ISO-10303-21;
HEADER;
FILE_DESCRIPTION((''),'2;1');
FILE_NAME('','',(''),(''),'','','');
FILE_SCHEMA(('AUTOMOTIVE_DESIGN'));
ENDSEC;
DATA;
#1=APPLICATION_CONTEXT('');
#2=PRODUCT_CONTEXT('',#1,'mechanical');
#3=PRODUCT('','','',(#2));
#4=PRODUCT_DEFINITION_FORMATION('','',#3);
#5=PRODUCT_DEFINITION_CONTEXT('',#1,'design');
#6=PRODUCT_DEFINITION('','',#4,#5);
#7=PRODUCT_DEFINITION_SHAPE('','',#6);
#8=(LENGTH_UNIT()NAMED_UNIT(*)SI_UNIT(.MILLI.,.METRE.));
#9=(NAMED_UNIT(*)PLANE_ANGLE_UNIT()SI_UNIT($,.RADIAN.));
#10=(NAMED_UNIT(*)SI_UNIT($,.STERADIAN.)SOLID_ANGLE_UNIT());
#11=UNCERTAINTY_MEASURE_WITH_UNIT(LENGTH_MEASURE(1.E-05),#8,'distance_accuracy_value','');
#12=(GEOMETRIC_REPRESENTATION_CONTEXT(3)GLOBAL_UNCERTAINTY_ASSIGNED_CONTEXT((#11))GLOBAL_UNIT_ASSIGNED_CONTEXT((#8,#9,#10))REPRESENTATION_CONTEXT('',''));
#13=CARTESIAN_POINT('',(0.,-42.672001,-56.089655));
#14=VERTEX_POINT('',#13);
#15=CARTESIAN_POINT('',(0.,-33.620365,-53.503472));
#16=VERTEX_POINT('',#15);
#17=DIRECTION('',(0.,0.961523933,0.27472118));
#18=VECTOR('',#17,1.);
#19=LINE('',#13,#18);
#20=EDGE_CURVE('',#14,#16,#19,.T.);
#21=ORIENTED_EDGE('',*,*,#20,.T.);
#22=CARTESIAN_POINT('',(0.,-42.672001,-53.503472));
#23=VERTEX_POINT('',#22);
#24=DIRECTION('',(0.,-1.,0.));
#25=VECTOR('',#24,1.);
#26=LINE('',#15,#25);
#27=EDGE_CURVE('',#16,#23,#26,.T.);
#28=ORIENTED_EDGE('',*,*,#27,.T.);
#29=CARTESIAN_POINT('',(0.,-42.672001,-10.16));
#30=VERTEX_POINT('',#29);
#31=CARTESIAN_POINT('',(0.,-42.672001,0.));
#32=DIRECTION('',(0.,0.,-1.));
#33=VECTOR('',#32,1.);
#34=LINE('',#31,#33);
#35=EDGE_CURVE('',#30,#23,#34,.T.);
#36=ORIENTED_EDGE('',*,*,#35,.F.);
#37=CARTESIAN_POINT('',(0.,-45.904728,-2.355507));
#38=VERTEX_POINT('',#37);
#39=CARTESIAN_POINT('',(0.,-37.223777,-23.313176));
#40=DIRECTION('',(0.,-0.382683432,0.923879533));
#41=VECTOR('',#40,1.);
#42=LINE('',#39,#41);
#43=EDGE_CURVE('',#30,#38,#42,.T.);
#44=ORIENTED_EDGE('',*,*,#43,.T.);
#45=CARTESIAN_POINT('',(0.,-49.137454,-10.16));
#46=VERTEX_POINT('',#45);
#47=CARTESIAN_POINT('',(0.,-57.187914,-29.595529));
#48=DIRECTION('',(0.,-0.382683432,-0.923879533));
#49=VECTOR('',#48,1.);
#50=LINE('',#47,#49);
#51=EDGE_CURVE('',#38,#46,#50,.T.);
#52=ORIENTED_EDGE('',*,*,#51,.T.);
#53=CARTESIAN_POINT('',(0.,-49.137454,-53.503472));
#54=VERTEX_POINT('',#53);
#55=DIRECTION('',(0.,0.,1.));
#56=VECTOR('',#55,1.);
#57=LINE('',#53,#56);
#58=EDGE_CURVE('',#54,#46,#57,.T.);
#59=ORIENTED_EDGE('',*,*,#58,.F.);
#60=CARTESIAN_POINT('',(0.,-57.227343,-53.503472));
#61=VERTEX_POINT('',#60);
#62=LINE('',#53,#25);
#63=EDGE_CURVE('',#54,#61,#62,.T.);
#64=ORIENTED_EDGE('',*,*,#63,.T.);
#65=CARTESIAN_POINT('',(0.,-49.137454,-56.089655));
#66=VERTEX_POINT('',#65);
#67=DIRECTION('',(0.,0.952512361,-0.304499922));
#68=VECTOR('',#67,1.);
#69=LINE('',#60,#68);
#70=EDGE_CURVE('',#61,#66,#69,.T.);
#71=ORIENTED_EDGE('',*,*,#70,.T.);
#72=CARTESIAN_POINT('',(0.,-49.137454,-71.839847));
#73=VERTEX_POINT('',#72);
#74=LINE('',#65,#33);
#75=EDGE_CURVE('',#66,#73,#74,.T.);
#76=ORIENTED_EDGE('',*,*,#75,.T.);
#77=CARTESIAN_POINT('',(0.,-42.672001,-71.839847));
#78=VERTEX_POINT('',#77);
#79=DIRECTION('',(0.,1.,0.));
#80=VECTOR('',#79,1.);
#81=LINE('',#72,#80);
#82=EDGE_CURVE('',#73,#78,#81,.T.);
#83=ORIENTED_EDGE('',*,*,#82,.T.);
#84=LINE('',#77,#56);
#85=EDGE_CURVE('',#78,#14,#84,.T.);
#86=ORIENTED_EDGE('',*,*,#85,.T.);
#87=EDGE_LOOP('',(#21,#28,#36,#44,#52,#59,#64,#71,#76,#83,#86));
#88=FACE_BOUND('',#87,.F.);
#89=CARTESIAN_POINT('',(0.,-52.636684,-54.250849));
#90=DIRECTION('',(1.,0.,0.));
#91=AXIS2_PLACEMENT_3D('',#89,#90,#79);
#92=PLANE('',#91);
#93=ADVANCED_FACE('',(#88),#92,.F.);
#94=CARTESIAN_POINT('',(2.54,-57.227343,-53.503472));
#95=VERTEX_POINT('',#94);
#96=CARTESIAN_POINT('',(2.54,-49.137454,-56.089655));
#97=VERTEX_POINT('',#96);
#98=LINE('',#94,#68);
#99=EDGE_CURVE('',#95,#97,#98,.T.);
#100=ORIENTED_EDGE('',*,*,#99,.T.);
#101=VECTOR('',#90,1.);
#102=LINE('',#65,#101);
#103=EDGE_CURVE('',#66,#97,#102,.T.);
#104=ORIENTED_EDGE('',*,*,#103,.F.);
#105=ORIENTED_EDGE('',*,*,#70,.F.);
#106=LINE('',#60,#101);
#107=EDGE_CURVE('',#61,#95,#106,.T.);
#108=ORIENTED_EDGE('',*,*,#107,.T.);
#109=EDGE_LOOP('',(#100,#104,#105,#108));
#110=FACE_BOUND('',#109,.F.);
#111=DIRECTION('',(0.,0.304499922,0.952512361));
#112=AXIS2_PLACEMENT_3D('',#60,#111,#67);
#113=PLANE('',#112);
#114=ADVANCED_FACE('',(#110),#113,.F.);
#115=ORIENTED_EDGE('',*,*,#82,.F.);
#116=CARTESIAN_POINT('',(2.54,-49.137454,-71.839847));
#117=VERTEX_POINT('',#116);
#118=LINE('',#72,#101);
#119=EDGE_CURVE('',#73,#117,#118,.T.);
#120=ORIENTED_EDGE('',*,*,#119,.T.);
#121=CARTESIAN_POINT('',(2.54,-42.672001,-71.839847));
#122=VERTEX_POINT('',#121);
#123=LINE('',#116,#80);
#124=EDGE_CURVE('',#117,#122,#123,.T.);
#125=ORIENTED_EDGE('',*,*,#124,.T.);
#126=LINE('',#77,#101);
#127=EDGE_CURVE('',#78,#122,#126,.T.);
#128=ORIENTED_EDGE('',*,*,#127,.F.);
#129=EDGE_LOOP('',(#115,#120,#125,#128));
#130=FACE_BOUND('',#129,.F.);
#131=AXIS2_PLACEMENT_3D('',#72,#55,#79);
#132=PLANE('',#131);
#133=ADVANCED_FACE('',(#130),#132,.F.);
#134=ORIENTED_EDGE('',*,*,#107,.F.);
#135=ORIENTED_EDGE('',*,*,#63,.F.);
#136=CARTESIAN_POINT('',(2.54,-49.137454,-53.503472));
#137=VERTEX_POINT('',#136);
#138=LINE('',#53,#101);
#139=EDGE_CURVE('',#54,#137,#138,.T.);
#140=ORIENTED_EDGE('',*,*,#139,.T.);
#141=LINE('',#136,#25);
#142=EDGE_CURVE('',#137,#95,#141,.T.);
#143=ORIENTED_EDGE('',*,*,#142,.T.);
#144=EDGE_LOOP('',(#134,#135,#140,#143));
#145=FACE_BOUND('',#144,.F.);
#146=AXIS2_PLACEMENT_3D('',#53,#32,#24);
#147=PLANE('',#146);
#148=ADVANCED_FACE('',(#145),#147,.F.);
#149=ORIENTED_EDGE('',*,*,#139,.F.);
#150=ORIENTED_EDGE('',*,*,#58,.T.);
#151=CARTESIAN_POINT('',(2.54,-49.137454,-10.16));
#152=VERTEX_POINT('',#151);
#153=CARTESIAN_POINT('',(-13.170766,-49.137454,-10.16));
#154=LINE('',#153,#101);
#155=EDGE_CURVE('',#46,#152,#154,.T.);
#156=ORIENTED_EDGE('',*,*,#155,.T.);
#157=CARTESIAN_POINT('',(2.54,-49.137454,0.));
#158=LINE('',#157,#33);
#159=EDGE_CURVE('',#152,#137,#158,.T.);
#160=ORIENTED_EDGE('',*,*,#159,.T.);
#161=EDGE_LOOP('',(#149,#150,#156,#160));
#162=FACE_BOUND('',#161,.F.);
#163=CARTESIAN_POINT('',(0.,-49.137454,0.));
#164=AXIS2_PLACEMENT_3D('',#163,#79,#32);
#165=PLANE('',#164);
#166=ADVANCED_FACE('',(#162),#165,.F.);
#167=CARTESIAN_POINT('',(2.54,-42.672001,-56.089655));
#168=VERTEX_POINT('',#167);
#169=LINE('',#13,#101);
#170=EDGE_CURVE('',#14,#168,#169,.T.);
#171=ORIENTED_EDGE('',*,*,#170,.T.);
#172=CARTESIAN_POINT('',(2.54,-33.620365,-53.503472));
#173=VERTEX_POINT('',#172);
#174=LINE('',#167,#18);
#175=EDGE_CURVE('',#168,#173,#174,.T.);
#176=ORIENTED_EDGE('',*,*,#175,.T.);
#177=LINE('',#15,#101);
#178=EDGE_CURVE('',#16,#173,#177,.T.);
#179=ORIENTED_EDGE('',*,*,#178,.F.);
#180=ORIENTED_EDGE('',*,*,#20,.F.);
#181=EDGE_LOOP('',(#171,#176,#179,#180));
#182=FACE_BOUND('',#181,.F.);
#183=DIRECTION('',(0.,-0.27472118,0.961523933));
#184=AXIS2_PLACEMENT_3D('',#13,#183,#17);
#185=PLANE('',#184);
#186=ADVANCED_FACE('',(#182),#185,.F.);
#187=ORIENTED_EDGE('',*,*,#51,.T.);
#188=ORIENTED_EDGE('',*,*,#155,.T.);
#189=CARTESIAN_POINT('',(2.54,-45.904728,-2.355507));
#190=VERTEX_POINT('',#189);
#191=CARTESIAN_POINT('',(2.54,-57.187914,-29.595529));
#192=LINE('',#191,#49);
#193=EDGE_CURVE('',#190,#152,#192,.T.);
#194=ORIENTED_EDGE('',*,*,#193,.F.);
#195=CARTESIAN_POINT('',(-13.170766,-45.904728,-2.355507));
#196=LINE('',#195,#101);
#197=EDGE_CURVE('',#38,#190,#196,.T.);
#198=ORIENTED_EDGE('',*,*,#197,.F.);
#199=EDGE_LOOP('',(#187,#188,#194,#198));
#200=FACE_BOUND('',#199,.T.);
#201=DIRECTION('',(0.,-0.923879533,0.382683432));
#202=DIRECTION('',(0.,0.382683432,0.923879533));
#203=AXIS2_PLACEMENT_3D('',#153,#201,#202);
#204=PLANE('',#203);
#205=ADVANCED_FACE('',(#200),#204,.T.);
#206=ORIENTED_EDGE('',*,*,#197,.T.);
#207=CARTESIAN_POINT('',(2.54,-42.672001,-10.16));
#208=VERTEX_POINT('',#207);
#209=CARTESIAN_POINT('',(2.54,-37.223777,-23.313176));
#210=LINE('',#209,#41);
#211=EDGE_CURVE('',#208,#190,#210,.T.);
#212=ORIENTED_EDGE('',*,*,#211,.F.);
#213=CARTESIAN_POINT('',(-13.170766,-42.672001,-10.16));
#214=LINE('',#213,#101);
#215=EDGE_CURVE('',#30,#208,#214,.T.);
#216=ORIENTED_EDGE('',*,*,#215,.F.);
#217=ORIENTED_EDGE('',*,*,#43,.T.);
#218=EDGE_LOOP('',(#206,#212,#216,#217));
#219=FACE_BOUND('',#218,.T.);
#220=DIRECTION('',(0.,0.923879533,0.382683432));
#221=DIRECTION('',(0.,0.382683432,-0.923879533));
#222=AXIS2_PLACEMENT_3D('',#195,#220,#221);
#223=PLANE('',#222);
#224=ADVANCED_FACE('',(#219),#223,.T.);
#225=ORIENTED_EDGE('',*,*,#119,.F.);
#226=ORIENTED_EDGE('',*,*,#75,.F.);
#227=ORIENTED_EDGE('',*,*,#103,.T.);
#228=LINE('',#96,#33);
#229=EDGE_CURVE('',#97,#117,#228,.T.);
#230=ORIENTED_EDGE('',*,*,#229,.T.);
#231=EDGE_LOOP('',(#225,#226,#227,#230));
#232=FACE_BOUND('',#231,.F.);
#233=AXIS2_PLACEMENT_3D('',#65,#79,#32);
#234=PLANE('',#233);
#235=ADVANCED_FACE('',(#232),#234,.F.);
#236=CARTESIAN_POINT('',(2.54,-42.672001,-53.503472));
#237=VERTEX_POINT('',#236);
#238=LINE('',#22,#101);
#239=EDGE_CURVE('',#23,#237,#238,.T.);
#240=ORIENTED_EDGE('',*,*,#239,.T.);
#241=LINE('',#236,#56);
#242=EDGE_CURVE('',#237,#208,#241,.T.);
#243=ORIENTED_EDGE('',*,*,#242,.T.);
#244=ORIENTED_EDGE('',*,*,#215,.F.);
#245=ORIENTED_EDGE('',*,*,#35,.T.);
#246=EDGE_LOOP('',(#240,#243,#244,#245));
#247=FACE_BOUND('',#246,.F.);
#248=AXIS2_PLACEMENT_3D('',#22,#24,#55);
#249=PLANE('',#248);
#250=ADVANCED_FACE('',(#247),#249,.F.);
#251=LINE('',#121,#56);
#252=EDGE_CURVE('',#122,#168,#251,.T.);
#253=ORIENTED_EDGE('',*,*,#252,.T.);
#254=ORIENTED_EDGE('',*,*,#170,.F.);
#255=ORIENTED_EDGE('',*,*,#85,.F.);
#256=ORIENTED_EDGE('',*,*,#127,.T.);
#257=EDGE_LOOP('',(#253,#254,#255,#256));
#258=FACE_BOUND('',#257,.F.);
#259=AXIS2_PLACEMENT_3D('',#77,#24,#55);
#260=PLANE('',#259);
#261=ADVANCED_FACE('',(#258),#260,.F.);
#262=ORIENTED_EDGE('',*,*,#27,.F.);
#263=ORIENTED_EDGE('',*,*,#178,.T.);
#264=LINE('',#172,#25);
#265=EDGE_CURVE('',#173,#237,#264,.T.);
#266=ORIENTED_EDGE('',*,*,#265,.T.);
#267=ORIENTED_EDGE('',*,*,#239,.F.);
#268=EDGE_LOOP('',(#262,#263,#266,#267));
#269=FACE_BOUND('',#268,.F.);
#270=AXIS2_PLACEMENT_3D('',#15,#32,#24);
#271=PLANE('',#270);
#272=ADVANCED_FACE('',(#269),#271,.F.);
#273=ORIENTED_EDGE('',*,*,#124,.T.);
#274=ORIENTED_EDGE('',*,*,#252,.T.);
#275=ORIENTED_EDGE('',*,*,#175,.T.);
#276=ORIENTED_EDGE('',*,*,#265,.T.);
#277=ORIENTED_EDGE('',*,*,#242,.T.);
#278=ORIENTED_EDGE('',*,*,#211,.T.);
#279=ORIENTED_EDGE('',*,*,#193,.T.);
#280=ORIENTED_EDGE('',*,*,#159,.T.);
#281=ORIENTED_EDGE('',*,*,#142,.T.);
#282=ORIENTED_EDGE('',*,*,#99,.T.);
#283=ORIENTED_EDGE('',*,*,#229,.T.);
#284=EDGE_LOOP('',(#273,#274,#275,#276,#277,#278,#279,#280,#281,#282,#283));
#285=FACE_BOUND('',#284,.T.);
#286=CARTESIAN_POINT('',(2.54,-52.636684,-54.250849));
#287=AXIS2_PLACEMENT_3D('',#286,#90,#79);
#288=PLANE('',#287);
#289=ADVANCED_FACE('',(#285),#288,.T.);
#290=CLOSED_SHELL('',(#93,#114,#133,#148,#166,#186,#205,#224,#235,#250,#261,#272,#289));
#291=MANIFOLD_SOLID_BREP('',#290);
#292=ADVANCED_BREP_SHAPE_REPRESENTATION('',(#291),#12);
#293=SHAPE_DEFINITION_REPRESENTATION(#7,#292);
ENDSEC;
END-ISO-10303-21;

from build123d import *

# Parameters (mm, degrees)
F1_DEPTH    = 2.54
F2_T1_DEPTH = 28.6682991577
F3_DEPTH    = 2.54
F4_DEPTH    = 2.54
F5_T1_DEPTH = 28.6682991577
F6_T1_DEPTH = 28.8815311919


# Not quite as in the source:
# - a fillet or chamfer that OpenCascade refuses, or shapes differently, is made with other operations: its cross-section is extruded or revolved along the edge and cut away or added


with BuildPart() as f1:
    # F0 (on Right) → F1 (new body)
    with BuildSketch(Plane.YZ):
        Polygon((-57.2273433208, -53.503472358), (-49.1374544799, -56.0896545649), (-49.1374544799, -53.503472358), align=None)
        Polygon((-49.1374544799, -53.503472358), (-49.1374544799, -56.0896545649), (-42.6720008254, -56.0896545649), (-42.6720008254, -53.503472358), (-42.6720008254, 0), (-49.1374544799, 0), align=None)
        with BuildLine():
            Line((-42.6720008254, -56.0896545649), (-49.1374544799, -56.0896545649))
            Line((-49.1374544799, -56.0896545649), (-49.1374544799, -67.4042031169))
            ThreePointArc((-49.1374544799, -67.4042031169), (-45.9047276527, -64.1714762896), (-42.6720008254, -67.4042031169))
            Line((-42.6720008254, -67.4042031169), (-42.6720008254, -56.0896545649))
        make_face()
        Polygon((-42.6720008254, -53.503472358), (-42.6720008254, -56.0896545649), (-33.620364964, -53.503472358), align=None)
        with BuildLine():
            ThreePointArc((-42.6720008254, -67.4042031169), (-45.9047276527, -70.6369299442), (-49.1374544799, -67.4042031169))
            Line((-49.1374544799, -67.4042031169), (-49.1374544799, -71.8398466706))
            Line((-49.1374544799, -71.8398466706), (-42.6720008254, -71.8398466706))
            Line((-42.6720008254, -71.8398466706), (-42.6720008254, -67.4042031169))
        make_face()
        with BuildLine():
            ThreePointArc((-42.6720008254, -67.4042031169), (-45.9047276527, -64.1714762896), (-49.1374544799, -67.4042031169))
            ThreePointArc((-49.1374544799, -67.4042031169), (-45.9047276527, -70.6369299442), (-42.6720008254, -67.4042031169))
        make_face()
    extrude(amount=F1_DEPTH)

    # F2: chamfer of 5.08 on 2 edges, made by hand

    # F2_s2 → F2_t1 (cut)
    with BuildSketch(Plane.YZ.offset(-13.0641495789)):
        Polygon((-44.0574544799, 0), (-49.1374544799, -5.08), (-49.1374544799, 0), align=None)
        Polygon((-42.6720008254, -5.08), (-47.7520008254, 0), (-42.6720008254, 0), align=None)
    extrude(amount=F2_T1_DEPTH, mode=Mode.SUBTRACT)

    # F0 (on Right) → F3 (join)
    with BuildSketch(Plane.YZ):
        Polygon((-57.2273433208, -53.503472358), (-49.1374544799, -56.0896545649), (-49.1374544799, -53.503472358), align=None)
        Polygon((-49.1374544799, -53.503472358), (-49.1374544799, -56.0896545649), (-42.6720008254, -56.0896545649), (-42.6720008254, -53.503472358), (-42.6720008254, 0), (-49.1374544799, 0), align=None)
        with BuildLine():
            Line((-42.6720008254, -56.0896545649), (-49.1374544799, -56.0896545649))
            Line((-49.1374544799, -56.0896545649), (-49.1374544799, -67.4042031169))
            ThreePointArc((-49.1374544799, -67.4042031169), (-45.9047276527, -64.1714762896), (-42.6720008254, -67.4042031169))
            Line((-42.6720008254, -67.4042031169), (-42.6720008254, -56.0896545649))
        make_face()
        Polygon((-42.6720008254, -53.503472358), (-42.6720008254, -56.0896545649), (-33.620364964, -53.503472358), align=None)
        with BuildLine():
            ThreePointArc((-42.6720008254, -67.4042031169), (-45.9047276527, -70.6369299442), (-49.1374544799, -67.4042031169))
            Line((-49.1374544799, -67.4042031169), (-49.1374544799, -71.8398466706))
            Line((-49.1374544799, -71.8398466706), (-42.6720008254, -71.8398466706))
            Line((-42.6720008254, -71.8398466706), (-42.6720008254, -67.4042031169))
        make_face()
        with BuildLine():
            ThreePointArc((-42.6720008254, -67.4042031169), (-45.9047276527, -64.1714762896), (-49.1374544799, -67.4042031169))
            ThreePointArc((-49.1374544799, -67.4042031169), (-45.9047276527, -70.6369299442), (-42.6720008254, -67.4042031169))
        make_face()
    extrude(amount=F3_DEPTH)

    # F0 (on Right) → F4 (join)
    with BuildSketch(Plane.YZ):
        Polygon((-57.2273433208, -53.503472358), (-49.1374544799, -56.0896545649), (-49.1374544799, -53.503472358), align=None)
        Polygon((-49.1374544799, -53.503472358), (-49.1374544799, -56.0896545649), (-42.6720008254, -56.0896545649), (-42.6720008254, -53.503472358), (-42.6720008254, 0), (-49.1374544799, 0), align=None)
        with BuildLine():
            Line((-42.6720008254, -56.0896545649), (-49.1374544799, -56.0896545649))
            Line((-49.1374544799, -56.0896545649), (-49.1374544799, -67.4042031169))
            ThreePointArc((-49.1374544799, -67.4042031169), (-45.9047276527, -64.1714762896), (-42.6720008254, -67.4042031169))
            Line((-42.6720008254, -67.4042031169), (-42.6720008254, -56.0896545649))
        make_face()
        Polygon((-42.6720008254, -53.503472358), (-42.6720008254, -56.0896545649), (-33.620364964, -53.503472358), align=None)
        with BuildLine():
            ThreePointArc((-42.6720008254, -67.4042031169), (-45.9047276527, -70.6369299442), (-49.1374544799, -67.4042031169))
            Line((-49.1374544799, -67.4042031169), (-49.1374544799, -71.8398466706))
            Line((-49.1374544799, -71.8398466706), (-42.6720008254, -71.8398466706))
            Line((-42.6720008254, -71.8398466706), (-42.6720008254, -67.4042031169))
        make_face()
        with BuildLine():
            ThreePointArc((-42.6720008254, -67.4042031169), (-45.9047276527, -64.1714762896), (-49.1374544799, -67.4042031169))
            ThreePointArc((-49.1374544799, -67.4042031169), (-45.9047276527, -70.6369299442), (-42.6720008254, -67.4042031169))
        make_face()
    extrude(amount=F4_DEPTH)

    # F5: chamfer of 5.08 on 2 edges, made by hand

    # F5_s2 → F5_t1 (cut)
    with BuildSketch(Plane.YZ.offset(-13.0641495789)):
        Polygon((-49.1374544799, -5.08), (-44.0574544799, 0), (-49.1374544799, 0), align=None)
        Polygon((-42.6720008254, -5.08), (-47.7520008254, 0), (-42.6720008254, 0), align=None)
    extrude(amount=F5_T1_DEPTH, mode=Mode.SUBTRACT)

    # F6: chamfer of 5.08 on 2 edges, made by hand

    # F6_s2 → F6_t1 (cut)
    with BuildSketch(Plane.YZ.offset(-13.170765596)):
        Polygon((-49.1374544799, -10.16), (-45.5453520315, -1.4878975516), (-49.1374544799, -5.08), align=None)
        Polygon((-46.2641032738, -1.4878975516), (-42.6720008254, -10.16), (-42.6720008254, -5.08), align=None)
    extrude(amount=F6_T1_DEPTH, mode=Mode.SUBTRACT)


solid = f1.part
